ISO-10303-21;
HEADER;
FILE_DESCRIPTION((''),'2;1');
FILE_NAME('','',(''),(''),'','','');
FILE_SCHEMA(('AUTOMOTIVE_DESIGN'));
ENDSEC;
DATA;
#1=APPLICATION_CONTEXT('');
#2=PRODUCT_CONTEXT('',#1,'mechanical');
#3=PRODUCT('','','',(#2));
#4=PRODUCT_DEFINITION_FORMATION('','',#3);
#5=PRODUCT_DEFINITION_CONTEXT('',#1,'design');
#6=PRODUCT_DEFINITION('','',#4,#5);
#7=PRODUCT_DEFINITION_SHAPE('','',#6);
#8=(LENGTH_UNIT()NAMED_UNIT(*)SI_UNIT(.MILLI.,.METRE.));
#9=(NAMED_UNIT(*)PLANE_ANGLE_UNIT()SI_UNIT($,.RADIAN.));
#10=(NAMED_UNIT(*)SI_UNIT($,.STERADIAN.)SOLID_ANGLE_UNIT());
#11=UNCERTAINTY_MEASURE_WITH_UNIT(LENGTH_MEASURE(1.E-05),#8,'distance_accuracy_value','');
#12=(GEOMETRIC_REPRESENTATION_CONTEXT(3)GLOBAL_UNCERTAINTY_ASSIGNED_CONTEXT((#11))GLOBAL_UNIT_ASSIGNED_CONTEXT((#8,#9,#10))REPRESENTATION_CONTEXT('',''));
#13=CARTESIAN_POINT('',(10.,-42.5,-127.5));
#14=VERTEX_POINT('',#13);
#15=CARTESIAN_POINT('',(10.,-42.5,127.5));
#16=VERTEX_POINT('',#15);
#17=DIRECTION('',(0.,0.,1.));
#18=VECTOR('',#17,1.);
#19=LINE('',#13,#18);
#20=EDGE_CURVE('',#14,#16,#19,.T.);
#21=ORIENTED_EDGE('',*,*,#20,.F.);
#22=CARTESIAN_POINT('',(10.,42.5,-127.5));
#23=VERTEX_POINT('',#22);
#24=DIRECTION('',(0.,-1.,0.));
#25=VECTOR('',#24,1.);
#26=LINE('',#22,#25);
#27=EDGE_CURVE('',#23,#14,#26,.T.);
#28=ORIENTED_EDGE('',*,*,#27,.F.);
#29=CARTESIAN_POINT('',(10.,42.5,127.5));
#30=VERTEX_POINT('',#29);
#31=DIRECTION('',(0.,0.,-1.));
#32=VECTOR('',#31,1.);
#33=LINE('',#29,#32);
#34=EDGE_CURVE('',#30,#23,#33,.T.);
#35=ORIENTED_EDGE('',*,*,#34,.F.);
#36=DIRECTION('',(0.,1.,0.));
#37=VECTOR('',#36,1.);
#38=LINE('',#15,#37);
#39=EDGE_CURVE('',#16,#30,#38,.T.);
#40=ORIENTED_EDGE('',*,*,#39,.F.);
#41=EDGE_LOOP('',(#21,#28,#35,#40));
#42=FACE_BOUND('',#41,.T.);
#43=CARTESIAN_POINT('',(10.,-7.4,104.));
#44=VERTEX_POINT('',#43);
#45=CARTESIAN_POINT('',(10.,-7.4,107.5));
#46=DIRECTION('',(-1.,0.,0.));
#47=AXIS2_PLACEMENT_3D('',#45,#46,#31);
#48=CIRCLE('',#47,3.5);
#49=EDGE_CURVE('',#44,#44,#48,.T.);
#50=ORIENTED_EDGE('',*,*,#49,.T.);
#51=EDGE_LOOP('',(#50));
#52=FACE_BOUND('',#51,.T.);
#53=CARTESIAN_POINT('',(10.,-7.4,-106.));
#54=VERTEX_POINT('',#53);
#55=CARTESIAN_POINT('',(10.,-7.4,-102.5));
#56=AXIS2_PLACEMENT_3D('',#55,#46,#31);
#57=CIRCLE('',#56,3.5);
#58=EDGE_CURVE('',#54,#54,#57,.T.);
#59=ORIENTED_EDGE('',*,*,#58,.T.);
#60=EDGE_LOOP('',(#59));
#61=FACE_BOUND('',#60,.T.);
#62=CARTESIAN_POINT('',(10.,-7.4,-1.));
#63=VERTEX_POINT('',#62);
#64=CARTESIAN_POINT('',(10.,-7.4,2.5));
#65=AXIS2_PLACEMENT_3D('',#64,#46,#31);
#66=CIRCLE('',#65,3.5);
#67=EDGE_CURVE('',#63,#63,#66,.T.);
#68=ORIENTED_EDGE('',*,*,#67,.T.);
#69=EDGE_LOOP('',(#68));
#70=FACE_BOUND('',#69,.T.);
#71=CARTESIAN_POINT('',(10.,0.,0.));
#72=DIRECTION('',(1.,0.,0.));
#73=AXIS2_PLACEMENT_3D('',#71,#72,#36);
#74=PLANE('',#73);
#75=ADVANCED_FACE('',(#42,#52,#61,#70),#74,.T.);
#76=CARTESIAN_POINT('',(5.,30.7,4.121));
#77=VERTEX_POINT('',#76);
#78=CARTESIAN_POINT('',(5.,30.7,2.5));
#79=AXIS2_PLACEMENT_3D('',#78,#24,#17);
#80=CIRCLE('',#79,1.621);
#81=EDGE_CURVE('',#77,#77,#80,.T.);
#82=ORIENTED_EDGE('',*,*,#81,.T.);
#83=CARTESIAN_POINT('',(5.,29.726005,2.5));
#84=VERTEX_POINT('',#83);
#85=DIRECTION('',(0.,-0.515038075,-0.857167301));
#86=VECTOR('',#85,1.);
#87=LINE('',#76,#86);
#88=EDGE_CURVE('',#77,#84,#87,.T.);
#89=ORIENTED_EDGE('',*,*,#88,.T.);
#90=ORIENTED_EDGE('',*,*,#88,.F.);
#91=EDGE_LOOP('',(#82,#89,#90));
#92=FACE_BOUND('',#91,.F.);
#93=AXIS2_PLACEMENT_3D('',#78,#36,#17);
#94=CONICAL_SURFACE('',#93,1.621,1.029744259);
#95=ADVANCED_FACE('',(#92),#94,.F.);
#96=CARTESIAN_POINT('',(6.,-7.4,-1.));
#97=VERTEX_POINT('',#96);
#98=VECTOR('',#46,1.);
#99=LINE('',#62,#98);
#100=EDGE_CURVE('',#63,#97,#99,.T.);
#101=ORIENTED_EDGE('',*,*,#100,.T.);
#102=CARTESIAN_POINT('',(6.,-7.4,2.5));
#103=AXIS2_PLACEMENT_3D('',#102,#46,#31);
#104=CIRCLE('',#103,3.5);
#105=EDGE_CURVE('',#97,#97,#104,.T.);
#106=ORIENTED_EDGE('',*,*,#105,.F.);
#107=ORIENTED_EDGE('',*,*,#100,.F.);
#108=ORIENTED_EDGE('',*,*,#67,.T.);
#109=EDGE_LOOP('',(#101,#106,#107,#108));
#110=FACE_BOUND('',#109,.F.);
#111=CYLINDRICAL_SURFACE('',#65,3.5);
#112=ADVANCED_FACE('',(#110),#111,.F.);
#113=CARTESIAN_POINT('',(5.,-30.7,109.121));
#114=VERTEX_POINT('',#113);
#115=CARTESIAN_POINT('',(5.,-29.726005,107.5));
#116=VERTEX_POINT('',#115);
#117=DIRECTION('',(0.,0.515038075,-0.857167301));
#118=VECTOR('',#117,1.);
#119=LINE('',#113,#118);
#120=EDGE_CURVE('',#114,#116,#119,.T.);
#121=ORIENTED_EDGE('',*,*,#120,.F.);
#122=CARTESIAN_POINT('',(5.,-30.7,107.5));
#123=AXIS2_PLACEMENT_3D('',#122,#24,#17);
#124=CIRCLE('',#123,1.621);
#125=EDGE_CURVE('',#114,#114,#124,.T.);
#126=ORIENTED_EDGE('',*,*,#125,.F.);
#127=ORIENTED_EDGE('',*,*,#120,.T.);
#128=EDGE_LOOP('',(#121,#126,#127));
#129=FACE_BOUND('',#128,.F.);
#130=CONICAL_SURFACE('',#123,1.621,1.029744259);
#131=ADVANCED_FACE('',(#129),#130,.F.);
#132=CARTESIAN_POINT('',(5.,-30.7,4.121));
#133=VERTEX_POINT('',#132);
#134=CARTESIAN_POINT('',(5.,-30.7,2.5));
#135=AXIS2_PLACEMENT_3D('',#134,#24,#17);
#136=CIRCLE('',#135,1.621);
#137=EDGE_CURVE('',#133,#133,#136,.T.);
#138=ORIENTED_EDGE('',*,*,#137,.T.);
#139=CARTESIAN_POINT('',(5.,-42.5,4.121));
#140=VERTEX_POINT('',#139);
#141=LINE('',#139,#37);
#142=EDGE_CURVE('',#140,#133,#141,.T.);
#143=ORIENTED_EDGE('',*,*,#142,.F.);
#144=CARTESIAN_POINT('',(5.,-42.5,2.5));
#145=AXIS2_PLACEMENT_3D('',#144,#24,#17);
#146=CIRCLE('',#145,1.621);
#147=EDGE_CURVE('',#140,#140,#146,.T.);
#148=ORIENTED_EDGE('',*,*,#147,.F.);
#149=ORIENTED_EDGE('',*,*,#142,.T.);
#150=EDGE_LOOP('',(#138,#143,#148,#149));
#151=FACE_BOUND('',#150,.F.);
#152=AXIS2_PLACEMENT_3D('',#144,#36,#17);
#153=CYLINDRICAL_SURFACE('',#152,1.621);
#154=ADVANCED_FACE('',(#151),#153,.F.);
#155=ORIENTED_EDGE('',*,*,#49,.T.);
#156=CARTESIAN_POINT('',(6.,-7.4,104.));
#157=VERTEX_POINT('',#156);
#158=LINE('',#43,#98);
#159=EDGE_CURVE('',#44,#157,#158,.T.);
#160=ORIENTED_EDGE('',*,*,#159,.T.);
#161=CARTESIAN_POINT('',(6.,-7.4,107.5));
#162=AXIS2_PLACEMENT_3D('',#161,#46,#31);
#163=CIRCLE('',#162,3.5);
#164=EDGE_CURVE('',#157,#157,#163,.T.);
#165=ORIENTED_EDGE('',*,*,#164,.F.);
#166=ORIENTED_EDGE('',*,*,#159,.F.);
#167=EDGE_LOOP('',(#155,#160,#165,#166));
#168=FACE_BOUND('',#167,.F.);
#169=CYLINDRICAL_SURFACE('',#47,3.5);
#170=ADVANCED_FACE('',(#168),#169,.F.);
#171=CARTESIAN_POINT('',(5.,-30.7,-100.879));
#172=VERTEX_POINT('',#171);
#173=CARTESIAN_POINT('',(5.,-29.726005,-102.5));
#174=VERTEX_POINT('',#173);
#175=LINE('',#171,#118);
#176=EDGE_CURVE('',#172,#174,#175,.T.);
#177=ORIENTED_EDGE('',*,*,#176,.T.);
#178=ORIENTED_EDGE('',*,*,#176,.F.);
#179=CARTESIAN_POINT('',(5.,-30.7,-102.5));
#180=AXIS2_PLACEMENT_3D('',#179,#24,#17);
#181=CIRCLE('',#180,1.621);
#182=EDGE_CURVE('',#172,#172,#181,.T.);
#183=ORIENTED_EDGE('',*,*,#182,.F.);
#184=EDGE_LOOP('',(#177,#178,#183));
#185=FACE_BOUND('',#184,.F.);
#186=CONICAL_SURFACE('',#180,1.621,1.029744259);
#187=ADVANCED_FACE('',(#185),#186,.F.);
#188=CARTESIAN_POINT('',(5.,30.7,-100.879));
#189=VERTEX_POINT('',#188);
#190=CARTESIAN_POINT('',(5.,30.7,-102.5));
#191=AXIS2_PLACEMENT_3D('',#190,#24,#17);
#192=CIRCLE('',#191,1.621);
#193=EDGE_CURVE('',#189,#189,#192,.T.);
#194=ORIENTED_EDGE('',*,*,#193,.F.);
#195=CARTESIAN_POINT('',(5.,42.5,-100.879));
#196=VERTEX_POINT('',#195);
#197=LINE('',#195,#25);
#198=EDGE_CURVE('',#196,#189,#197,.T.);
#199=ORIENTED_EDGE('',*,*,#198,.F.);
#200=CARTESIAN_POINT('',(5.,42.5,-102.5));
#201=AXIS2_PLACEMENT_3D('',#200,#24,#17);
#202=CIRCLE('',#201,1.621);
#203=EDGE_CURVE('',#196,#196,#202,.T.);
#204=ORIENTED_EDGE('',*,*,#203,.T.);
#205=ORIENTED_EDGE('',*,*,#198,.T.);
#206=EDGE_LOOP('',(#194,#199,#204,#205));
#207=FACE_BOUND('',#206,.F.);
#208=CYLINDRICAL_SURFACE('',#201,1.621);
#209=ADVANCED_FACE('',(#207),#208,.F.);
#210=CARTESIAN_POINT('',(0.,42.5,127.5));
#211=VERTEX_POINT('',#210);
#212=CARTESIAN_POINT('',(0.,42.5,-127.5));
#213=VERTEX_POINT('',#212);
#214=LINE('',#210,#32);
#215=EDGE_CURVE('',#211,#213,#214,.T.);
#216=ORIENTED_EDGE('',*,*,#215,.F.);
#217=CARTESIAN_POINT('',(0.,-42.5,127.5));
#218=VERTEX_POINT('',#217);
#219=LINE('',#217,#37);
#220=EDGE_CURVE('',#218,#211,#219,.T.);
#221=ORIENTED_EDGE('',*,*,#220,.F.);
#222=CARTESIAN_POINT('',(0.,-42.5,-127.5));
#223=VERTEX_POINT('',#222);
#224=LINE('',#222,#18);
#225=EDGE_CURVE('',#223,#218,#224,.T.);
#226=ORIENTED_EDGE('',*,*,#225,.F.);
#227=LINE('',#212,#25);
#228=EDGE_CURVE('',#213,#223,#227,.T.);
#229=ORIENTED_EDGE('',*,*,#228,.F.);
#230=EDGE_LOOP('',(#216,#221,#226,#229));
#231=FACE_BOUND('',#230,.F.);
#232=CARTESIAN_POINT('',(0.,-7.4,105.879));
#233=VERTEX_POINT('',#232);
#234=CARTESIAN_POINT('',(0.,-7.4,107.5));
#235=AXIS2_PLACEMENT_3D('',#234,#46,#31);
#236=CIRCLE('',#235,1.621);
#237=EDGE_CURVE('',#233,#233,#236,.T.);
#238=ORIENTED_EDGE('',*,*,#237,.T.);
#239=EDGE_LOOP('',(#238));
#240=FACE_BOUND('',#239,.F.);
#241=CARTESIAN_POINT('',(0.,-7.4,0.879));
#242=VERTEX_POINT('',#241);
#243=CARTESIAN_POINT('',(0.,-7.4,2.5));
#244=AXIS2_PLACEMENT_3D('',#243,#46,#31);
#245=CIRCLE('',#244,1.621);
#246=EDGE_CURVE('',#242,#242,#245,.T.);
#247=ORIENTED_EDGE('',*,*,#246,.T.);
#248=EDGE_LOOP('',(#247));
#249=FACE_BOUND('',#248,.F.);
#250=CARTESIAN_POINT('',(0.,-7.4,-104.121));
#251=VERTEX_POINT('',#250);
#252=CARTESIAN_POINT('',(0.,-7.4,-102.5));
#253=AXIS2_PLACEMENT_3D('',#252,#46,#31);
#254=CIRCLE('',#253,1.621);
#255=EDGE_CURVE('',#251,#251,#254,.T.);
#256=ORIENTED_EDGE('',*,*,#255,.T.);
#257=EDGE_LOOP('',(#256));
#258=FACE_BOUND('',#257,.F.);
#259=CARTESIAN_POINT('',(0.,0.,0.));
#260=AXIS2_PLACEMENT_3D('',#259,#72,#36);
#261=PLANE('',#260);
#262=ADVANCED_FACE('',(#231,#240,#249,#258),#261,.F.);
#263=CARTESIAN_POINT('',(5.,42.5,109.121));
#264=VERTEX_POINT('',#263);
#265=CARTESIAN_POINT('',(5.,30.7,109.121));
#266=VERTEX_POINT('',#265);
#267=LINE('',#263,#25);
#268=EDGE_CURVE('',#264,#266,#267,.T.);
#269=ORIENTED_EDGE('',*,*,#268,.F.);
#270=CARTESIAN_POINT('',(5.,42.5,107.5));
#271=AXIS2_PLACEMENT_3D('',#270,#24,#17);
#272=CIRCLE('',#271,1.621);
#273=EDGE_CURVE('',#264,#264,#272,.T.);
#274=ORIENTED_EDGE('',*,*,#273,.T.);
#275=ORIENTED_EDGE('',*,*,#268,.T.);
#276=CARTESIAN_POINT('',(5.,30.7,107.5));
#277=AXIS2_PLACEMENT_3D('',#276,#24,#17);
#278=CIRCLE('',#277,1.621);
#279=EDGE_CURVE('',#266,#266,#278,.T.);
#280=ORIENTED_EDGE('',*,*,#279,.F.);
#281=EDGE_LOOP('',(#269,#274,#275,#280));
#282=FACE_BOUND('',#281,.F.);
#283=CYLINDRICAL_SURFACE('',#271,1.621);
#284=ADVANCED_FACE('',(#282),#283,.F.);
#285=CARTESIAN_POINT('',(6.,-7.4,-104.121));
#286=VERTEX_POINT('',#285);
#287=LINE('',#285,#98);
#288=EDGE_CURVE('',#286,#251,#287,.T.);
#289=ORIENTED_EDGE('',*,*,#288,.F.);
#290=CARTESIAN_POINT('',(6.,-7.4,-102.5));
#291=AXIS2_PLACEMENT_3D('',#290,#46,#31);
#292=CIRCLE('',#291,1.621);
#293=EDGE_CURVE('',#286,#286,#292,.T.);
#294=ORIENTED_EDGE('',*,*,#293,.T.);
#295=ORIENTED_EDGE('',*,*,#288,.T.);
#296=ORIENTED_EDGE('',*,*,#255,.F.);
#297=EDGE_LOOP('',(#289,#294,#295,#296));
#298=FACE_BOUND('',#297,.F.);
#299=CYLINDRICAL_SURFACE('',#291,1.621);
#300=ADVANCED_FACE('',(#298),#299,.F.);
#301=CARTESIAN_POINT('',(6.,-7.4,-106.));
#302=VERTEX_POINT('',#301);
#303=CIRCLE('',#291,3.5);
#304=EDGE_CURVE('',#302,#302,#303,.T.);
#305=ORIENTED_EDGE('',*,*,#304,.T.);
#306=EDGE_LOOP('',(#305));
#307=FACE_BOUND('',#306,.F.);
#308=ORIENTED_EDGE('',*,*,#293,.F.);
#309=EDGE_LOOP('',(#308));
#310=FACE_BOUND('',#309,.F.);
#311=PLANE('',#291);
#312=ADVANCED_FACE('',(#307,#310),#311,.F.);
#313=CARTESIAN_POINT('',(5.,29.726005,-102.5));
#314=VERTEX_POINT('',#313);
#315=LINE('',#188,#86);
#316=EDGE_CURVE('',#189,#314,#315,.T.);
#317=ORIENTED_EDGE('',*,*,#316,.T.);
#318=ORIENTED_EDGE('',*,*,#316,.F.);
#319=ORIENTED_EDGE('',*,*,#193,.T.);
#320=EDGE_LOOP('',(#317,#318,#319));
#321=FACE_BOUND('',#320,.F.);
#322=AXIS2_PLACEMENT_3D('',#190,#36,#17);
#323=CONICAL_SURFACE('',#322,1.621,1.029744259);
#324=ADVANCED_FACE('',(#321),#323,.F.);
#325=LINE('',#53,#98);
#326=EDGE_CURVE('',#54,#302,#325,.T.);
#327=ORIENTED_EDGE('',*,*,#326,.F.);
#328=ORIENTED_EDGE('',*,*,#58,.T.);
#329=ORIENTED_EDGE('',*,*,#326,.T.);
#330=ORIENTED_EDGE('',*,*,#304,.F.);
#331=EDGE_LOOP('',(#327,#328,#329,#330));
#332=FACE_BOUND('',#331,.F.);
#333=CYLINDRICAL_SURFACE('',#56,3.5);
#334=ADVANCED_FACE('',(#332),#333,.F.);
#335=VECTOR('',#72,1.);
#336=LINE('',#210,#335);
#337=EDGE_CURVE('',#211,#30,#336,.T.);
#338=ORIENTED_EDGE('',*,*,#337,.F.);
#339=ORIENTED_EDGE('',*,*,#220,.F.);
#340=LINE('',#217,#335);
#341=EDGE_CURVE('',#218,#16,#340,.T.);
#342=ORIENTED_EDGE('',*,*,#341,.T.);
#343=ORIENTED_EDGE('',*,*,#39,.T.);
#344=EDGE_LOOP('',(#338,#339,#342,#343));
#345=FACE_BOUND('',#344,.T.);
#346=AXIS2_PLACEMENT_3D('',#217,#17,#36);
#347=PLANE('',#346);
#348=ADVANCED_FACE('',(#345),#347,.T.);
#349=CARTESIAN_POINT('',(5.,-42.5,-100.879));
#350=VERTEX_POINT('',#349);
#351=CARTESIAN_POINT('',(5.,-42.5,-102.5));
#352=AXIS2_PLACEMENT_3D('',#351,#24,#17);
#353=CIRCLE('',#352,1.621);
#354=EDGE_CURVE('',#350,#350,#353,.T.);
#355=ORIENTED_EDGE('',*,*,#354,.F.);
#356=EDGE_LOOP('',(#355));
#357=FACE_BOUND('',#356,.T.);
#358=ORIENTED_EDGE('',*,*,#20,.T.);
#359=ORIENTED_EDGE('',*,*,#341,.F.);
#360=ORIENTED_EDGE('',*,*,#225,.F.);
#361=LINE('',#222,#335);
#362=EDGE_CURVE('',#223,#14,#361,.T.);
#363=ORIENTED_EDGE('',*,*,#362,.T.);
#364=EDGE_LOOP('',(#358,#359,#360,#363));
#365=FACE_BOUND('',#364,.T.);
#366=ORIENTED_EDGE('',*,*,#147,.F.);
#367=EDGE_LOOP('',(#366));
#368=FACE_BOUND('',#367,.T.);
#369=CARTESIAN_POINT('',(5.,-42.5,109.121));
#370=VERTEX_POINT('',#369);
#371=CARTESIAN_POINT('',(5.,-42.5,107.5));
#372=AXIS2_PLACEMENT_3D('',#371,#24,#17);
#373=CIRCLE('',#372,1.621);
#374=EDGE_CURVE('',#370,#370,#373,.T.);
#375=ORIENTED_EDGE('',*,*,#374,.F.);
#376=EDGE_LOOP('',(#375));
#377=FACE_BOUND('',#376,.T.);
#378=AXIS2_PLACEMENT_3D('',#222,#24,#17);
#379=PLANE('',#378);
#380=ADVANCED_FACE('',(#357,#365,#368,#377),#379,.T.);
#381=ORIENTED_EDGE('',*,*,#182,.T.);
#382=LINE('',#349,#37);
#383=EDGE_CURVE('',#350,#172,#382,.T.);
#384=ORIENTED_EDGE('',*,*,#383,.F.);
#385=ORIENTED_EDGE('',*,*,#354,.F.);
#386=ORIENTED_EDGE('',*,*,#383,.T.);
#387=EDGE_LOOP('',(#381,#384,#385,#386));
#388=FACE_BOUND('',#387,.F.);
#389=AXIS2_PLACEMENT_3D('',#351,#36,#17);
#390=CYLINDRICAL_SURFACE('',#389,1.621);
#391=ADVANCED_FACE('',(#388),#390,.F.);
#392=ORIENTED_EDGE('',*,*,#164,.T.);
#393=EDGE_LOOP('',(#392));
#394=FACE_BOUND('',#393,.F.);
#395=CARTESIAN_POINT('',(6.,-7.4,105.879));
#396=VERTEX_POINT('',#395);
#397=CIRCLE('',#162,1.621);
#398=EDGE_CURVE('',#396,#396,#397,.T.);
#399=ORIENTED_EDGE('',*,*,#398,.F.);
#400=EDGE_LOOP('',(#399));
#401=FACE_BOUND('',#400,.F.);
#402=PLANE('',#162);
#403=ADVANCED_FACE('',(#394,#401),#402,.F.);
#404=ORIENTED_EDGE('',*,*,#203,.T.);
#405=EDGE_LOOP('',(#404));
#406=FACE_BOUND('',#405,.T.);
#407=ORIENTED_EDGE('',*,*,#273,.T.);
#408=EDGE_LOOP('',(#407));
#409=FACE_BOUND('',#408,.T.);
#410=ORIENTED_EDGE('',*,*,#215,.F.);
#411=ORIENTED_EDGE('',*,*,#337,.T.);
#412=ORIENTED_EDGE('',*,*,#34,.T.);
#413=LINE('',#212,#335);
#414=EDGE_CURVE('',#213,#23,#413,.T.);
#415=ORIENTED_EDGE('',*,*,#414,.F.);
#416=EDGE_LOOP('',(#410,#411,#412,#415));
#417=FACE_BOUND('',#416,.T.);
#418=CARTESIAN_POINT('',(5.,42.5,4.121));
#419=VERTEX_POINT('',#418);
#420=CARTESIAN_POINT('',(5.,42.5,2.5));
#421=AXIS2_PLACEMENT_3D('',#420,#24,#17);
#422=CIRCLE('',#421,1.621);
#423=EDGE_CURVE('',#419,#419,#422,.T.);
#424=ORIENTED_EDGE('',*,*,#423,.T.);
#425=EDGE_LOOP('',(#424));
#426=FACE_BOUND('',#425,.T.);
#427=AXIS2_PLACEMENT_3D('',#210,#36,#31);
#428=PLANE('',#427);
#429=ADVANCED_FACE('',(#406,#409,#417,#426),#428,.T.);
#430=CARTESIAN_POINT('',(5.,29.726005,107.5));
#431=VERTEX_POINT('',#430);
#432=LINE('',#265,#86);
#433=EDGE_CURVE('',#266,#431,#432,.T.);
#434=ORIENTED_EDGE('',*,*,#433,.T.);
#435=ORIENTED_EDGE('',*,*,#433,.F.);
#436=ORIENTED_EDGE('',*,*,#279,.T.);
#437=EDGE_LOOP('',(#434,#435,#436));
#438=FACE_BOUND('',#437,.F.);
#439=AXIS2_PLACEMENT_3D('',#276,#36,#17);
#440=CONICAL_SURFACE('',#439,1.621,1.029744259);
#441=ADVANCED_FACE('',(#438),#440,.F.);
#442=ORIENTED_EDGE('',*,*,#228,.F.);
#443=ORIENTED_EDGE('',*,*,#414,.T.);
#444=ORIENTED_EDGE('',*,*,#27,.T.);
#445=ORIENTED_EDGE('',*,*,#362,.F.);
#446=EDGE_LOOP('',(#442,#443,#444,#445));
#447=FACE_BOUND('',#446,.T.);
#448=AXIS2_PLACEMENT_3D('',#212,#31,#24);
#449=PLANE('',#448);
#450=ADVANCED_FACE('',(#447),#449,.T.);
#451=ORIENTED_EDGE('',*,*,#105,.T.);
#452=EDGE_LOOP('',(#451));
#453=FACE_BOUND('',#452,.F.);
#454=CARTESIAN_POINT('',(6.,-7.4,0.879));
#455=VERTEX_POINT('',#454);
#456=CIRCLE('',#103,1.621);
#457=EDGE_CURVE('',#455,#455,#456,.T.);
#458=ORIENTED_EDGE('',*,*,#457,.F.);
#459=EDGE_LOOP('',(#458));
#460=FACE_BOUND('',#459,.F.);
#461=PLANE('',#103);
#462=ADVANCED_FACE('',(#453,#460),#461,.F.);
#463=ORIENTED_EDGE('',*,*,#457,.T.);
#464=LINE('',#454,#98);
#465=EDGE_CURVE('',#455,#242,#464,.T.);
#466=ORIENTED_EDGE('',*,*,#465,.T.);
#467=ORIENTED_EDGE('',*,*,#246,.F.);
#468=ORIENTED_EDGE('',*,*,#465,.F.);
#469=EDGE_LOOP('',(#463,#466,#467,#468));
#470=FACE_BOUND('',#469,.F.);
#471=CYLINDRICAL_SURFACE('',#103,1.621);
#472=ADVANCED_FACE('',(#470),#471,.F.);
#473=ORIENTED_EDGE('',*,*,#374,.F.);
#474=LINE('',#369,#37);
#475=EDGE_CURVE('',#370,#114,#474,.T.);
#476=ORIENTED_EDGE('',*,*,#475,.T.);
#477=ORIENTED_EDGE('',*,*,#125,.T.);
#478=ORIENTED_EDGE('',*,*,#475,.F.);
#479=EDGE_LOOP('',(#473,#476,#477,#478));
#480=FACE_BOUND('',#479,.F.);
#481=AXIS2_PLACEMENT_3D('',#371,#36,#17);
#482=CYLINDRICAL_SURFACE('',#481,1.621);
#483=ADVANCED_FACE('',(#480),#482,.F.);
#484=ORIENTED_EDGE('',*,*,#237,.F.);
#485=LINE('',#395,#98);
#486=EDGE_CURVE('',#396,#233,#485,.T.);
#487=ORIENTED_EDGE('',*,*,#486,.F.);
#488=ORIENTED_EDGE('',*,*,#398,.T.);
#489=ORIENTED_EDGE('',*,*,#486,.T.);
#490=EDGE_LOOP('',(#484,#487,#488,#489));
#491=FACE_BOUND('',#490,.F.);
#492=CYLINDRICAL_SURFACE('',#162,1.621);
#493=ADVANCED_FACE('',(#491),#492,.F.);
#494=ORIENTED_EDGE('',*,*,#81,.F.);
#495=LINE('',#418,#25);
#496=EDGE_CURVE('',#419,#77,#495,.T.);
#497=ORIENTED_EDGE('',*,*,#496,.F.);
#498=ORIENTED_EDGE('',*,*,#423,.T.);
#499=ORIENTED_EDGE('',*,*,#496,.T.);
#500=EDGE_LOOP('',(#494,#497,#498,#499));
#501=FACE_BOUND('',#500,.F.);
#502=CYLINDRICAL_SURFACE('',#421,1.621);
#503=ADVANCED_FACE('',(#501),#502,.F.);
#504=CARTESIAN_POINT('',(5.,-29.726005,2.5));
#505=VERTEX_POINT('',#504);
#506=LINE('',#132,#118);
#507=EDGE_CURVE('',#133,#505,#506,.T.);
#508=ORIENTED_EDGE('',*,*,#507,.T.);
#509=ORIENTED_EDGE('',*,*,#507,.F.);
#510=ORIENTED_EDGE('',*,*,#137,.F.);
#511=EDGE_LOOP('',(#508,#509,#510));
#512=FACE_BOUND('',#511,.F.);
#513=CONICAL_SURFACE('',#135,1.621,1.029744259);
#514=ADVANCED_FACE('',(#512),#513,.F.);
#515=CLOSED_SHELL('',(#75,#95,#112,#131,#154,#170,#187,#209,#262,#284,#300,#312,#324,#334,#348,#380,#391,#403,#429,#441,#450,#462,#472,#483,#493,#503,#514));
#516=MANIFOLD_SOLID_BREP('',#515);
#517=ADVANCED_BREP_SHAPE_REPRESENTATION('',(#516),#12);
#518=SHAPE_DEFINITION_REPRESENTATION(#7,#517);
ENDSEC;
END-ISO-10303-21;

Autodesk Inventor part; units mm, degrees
ref_plane "YZ Plane" through (0, 0, 0) normal (1, 0, 0) x (0, 1, 0)
ref_plane "XZ Plane" through (0, 0, 0) normal (0, 1, 0) x (-1, 0, 0)
ref_plane "XY Plane" through (0, 0, 0) normal (0, 0, 1) x (1, 0, 0)
sketch "Skizze1" plane through (0, 0, 0) normal (1, 0, 0) x (0, 1, 0)
  line L0 (-42.5, 127.5) -> (42.5, 127.5)
  line L1 (42.5, 127.5) -> (42.5, -127.5)
  line L2 (42.5, -127.5) -> (-42.5, -127.5)
  line L3 (-42.5, -127.5) -> (-42.5, 127.5)
  line L4 (-42.5, 127.5) -> (42.5, -127.5) construction
  line L5 (42.5, 127.5) -> (-42.5, -127.5) construction
  point P0 (0, 0)
  dimension "d0" = 85
  dimension "d1" = 255
extrude "Extrusion1" add sketch "Skizze1" along normal blind 10
sketch "Skizze2" plane through (10, 0, 0) normal (1, 0, 0) x (0, 0, -1)
  line L0 (-127.5, 42.5) -> (-127.5, -42.5) projected
  line L1 (127.5, -42.5) -> (127.5, 42.5) projected
  line L2 (127.5, 42.5) -> (-127.5, 42.5) projected
  point P0 (0, 0)
  point P1 (-107.5, -7.4)
  point P2 (-2.5, -7.4)
  point P3 (102.5, -7.4)
  dimension "d4" = 20
  dimension "d5" = 25
  dimension "d6" = 105
  dimension "d7" = 49.9
  dimension "d8" = 49.9
  dimension "d9" = 49.9
hole "Bohrung1" at (10, -7.4, 107.5) at (10, -7.4, 2.5) at (10, -7.4, -102.5) direction (-1, 0, 0) diameter 3.242 end through all counterbore diameter 7 counterbore depth 4 thread size "M4x0.7" class "6H" standard "ISO Metric profile"
sketch "Skizze3" plane through (0, 42.5, 127.5) normal (0, 1, 0) x (1, 0, 0)
  line L0 (0, 0) -> (10, 0) projected
  line L1 (5, 0) -> (5, 250)
  line L2 (0, 255) -> (10, 255) projected
  point P0 (0, 127.5)
  point P1 (5, 20)
  point P2 (5, 125)
  point P3 (5, 230)
  point P4 (5, 255)
  dimension "d17" = 20
  dimension "d18" = 25
  dimension "d19" = 105
hole "Bohrung2" at (5, 42.5, 107.5) at (5, 42.5, 2.5) at (5, 42.5, -102.5) direction (0, -1, 0) diameter 3.242 depth 11.8 tip angle 118 thread size "M4x0.7" class "6H" standard "ISO Metric profile"
mirror "Spiegeln1" about plane through (0, 0, 0) normal (0, 1, 0) of "Bohrung2"
equation "\"d8\" = d7"
equation "\"d9\" = d7"
properties part number "ER_Wand_1"
